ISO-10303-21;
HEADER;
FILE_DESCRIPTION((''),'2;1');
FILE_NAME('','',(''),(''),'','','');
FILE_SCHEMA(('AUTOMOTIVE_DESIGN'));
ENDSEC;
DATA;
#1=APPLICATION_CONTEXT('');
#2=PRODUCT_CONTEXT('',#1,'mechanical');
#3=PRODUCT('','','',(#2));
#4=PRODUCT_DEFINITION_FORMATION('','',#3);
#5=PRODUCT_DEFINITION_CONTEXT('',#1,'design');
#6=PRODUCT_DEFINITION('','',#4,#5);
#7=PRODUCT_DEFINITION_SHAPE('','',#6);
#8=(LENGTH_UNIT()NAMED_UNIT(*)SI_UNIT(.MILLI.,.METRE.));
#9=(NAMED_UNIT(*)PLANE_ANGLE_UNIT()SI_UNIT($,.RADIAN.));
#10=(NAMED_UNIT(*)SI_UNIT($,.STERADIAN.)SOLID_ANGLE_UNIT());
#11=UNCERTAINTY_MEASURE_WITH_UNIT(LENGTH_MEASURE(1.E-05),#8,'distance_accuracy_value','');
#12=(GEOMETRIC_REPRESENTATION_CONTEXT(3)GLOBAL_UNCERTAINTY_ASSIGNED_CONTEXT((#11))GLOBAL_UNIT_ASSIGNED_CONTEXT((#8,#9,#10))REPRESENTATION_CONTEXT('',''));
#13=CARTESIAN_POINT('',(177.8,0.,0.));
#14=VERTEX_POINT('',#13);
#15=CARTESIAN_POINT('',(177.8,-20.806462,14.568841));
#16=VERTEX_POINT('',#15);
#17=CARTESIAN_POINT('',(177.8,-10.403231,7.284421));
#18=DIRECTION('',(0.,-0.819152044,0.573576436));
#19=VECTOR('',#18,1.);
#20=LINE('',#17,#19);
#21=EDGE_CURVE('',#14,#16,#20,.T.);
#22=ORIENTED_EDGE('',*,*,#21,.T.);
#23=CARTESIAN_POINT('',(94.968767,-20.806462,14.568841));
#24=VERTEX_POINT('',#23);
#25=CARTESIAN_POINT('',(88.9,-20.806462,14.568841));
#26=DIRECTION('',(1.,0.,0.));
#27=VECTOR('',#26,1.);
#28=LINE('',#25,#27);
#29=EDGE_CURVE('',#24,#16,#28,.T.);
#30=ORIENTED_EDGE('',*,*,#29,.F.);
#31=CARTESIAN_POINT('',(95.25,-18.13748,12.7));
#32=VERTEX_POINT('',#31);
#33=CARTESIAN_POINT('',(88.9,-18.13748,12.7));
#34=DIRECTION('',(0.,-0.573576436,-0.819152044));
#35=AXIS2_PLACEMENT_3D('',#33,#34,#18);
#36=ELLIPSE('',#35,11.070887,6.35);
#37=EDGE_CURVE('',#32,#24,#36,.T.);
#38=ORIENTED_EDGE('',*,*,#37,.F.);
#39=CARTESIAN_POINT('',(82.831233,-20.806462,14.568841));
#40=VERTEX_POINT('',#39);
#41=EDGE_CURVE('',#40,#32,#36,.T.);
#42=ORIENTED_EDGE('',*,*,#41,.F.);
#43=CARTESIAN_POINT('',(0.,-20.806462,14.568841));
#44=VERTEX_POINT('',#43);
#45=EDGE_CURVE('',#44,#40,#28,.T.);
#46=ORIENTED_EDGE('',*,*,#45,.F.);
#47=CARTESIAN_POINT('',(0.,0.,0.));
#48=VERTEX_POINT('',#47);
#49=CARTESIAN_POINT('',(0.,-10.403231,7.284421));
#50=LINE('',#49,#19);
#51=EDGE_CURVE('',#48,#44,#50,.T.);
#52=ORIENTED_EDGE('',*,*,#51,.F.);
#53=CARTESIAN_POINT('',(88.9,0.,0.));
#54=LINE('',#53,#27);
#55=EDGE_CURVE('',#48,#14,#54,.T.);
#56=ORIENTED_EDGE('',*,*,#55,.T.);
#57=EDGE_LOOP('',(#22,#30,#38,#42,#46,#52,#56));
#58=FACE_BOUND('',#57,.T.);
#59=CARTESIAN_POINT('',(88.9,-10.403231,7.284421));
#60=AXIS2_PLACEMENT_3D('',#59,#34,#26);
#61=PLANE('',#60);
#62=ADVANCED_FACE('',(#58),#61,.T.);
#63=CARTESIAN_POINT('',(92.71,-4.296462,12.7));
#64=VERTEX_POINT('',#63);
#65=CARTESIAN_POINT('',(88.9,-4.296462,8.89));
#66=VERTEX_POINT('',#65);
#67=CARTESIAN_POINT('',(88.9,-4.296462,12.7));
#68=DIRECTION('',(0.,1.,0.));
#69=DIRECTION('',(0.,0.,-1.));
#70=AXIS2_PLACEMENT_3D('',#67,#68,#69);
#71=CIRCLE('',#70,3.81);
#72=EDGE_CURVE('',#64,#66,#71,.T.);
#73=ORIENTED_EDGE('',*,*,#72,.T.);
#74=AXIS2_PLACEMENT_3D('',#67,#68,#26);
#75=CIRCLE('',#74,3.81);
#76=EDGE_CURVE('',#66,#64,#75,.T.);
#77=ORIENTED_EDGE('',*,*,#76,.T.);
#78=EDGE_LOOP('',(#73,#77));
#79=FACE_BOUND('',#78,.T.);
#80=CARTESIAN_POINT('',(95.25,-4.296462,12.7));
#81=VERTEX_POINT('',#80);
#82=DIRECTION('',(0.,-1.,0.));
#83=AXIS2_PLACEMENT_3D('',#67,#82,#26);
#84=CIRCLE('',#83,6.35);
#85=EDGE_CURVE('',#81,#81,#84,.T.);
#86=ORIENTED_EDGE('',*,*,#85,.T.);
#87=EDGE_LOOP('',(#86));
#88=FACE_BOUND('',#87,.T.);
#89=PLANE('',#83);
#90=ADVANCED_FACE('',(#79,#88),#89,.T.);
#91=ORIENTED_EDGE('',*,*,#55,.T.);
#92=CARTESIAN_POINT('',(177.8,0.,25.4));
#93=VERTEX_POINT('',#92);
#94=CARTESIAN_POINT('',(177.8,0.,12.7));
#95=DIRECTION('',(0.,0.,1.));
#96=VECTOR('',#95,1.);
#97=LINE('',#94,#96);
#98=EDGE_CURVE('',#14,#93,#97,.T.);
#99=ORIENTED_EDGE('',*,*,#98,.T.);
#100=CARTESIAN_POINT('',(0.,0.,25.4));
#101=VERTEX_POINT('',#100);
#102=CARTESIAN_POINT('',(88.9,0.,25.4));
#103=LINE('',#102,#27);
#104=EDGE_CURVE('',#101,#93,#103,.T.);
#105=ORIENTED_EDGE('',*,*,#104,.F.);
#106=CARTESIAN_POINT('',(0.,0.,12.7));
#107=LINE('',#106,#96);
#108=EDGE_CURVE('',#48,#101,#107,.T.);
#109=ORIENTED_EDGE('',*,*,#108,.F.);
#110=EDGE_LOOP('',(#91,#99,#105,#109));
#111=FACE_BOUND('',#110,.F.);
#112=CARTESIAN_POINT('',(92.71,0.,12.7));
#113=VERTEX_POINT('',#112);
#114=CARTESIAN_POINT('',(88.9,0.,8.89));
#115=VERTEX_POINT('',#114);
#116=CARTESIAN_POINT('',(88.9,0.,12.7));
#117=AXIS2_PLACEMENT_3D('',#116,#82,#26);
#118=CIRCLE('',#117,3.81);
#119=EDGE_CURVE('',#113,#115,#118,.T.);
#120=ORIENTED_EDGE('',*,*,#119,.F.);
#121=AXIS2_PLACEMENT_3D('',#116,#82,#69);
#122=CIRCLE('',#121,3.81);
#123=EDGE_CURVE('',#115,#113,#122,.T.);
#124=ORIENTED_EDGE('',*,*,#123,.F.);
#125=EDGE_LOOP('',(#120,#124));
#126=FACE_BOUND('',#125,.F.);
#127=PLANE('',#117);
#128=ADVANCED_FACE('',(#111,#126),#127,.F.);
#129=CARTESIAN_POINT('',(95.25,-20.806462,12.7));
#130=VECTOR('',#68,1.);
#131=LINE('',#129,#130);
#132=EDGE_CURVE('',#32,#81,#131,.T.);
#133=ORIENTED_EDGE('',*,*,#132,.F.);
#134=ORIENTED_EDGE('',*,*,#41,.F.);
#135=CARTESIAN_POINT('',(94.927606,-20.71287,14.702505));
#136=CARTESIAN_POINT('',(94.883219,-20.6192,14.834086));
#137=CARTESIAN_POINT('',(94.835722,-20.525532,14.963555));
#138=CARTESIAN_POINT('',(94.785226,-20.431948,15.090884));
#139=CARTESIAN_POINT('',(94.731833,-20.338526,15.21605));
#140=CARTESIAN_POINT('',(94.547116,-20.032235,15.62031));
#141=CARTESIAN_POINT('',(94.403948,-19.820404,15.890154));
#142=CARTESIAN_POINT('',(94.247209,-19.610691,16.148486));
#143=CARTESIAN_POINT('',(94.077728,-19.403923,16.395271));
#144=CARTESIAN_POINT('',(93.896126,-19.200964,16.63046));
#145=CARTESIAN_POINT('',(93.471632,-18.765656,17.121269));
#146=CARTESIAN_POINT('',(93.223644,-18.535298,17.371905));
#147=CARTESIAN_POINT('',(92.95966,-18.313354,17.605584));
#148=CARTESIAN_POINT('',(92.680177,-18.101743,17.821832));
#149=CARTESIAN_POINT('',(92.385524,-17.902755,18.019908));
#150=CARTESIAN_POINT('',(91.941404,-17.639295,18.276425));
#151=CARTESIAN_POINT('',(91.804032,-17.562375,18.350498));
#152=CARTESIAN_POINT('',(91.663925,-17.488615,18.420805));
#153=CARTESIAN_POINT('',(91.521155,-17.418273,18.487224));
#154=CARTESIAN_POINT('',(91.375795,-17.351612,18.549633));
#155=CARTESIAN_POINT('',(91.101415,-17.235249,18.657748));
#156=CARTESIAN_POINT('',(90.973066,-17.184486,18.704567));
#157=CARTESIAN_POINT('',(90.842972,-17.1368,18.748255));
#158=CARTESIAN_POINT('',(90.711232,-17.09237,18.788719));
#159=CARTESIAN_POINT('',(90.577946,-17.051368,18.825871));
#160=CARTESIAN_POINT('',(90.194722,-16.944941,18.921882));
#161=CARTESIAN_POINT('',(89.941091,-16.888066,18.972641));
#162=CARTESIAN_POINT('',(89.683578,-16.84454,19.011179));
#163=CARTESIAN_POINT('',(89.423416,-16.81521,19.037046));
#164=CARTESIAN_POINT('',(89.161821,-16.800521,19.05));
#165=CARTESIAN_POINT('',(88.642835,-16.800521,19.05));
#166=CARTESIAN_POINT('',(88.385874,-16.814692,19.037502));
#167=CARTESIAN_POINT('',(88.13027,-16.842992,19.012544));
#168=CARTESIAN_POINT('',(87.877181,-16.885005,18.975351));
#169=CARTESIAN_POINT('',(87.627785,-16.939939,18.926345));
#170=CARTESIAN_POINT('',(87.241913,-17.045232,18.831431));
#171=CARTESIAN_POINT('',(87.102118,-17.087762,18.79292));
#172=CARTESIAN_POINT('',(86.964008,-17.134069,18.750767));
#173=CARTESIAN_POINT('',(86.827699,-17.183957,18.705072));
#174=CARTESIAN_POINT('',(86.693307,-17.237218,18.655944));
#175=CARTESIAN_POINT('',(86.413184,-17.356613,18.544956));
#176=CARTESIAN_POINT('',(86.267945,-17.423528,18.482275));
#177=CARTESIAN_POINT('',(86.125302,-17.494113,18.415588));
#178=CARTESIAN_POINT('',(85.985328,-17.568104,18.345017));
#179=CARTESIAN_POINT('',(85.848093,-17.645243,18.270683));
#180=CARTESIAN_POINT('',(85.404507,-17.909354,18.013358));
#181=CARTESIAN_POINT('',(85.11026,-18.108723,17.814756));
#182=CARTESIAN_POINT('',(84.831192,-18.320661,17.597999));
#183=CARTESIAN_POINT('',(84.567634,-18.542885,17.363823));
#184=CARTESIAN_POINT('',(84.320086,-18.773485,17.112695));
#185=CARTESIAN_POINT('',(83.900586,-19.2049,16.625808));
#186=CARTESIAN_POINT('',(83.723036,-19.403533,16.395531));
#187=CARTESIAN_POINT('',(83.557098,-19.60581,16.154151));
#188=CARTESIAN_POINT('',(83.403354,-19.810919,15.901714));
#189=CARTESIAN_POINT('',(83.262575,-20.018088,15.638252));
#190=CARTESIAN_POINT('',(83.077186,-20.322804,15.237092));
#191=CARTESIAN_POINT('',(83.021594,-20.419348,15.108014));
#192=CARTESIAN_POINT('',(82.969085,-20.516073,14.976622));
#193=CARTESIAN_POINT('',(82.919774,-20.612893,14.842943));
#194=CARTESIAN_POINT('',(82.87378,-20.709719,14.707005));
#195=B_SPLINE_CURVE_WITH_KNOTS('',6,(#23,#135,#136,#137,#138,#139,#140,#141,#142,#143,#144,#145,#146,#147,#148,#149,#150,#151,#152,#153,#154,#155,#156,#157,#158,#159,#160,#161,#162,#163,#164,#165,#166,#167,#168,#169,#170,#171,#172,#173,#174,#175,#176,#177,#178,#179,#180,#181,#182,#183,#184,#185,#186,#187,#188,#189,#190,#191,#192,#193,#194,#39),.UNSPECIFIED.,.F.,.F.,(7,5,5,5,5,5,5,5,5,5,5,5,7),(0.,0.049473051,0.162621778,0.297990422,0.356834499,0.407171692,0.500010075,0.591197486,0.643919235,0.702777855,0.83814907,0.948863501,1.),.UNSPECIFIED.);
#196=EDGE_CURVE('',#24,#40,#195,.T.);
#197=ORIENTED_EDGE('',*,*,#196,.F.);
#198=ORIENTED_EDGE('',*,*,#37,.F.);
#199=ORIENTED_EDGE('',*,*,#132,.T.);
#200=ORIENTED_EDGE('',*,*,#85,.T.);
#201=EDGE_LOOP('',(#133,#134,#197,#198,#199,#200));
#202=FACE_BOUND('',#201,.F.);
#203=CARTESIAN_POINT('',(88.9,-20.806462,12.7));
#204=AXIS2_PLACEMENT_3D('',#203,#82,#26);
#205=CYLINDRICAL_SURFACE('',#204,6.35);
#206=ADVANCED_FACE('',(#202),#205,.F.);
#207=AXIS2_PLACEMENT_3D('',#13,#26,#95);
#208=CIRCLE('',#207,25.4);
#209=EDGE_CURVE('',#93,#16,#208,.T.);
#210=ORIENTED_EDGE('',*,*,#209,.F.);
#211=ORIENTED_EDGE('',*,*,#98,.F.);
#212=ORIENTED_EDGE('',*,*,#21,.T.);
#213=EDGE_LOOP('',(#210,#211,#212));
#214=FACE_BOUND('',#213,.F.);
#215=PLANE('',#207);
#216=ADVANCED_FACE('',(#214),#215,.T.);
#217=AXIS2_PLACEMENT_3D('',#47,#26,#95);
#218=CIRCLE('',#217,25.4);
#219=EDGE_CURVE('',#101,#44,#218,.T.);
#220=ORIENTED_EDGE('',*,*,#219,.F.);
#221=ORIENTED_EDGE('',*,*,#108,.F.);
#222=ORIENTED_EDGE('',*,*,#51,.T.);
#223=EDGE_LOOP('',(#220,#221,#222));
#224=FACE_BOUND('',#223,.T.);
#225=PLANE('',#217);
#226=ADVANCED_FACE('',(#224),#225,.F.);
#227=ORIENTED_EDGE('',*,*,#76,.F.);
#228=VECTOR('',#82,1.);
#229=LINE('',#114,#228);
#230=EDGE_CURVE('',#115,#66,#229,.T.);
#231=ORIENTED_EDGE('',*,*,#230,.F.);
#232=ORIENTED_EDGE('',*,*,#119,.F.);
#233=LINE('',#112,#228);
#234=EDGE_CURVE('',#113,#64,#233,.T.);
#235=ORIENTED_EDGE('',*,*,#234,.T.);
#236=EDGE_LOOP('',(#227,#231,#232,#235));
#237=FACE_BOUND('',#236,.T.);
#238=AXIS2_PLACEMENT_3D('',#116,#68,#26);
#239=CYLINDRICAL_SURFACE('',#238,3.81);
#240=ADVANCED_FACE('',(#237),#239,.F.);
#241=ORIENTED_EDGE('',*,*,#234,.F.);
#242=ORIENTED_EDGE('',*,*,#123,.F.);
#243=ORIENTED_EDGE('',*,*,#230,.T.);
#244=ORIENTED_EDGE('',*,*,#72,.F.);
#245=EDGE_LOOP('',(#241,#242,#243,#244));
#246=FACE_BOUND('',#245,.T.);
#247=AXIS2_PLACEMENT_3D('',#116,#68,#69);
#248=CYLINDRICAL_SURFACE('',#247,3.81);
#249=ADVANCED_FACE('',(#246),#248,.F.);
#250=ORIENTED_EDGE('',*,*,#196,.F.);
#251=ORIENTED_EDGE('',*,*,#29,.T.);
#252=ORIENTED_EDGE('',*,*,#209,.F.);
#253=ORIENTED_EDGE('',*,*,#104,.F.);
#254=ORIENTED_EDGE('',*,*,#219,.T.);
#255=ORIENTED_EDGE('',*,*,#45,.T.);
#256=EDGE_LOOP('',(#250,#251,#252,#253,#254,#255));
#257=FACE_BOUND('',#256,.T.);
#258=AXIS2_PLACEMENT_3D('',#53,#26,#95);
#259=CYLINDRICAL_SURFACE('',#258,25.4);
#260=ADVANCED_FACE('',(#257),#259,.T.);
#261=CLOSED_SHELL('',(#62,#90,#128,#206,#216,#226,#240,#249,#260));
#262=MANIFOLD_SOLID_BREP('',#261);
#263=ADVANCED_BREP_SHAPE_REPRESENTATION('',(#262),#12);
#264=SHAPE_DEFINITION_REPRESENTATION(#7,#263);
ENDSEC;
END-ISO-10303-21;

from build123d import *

# Parameters (mm, degrees)
F0_W     = 177.8
F0_H     = 25.4
F1_ANGLE = 55
F3_DEPTH = 20.8074619249
F5_R     = 6.35
F6_DEPTH = 16.51


with BuildPart() as f1:
    # F0 (on Front) → F1 (revolve)
    with BuildSketch(Plane.XZ):
        with Locations((88.9, 12.7)):
            Rectangle(F0_W, F0_H)
    revolve(axis=Axis((88.9, 0, 0), (1, 0, 0)), revolution_arc=F1_ANGLE)

    # F2 (on Front) → F3 (cut, through all)
    with BuildSketch(Plane.XZ):
        with BuildLine():
            ThreePointArc((88.9, 8.89), (91.5940768363, 10.0059231637), (92.71, 12.7))
            ThreePointArc((92.71, 12.7), (86.2059231637, 15.3940768363), (88.9, 8.89))
        make_face()
    extrude(amount=F3_DEPTH, mode=Mode.SUBTRACT)

    # F5 (on plane+point) → F6 (cut)
    with BuildSketch(Plane.XZ.offset(20.8064619249)):
        with Locations((88.9, 12.7)):
            Circle(F5_R)
    extrude(amount=-F6_DEPTH, mode=Mode.SUBTRACT)


solid = f1.part
